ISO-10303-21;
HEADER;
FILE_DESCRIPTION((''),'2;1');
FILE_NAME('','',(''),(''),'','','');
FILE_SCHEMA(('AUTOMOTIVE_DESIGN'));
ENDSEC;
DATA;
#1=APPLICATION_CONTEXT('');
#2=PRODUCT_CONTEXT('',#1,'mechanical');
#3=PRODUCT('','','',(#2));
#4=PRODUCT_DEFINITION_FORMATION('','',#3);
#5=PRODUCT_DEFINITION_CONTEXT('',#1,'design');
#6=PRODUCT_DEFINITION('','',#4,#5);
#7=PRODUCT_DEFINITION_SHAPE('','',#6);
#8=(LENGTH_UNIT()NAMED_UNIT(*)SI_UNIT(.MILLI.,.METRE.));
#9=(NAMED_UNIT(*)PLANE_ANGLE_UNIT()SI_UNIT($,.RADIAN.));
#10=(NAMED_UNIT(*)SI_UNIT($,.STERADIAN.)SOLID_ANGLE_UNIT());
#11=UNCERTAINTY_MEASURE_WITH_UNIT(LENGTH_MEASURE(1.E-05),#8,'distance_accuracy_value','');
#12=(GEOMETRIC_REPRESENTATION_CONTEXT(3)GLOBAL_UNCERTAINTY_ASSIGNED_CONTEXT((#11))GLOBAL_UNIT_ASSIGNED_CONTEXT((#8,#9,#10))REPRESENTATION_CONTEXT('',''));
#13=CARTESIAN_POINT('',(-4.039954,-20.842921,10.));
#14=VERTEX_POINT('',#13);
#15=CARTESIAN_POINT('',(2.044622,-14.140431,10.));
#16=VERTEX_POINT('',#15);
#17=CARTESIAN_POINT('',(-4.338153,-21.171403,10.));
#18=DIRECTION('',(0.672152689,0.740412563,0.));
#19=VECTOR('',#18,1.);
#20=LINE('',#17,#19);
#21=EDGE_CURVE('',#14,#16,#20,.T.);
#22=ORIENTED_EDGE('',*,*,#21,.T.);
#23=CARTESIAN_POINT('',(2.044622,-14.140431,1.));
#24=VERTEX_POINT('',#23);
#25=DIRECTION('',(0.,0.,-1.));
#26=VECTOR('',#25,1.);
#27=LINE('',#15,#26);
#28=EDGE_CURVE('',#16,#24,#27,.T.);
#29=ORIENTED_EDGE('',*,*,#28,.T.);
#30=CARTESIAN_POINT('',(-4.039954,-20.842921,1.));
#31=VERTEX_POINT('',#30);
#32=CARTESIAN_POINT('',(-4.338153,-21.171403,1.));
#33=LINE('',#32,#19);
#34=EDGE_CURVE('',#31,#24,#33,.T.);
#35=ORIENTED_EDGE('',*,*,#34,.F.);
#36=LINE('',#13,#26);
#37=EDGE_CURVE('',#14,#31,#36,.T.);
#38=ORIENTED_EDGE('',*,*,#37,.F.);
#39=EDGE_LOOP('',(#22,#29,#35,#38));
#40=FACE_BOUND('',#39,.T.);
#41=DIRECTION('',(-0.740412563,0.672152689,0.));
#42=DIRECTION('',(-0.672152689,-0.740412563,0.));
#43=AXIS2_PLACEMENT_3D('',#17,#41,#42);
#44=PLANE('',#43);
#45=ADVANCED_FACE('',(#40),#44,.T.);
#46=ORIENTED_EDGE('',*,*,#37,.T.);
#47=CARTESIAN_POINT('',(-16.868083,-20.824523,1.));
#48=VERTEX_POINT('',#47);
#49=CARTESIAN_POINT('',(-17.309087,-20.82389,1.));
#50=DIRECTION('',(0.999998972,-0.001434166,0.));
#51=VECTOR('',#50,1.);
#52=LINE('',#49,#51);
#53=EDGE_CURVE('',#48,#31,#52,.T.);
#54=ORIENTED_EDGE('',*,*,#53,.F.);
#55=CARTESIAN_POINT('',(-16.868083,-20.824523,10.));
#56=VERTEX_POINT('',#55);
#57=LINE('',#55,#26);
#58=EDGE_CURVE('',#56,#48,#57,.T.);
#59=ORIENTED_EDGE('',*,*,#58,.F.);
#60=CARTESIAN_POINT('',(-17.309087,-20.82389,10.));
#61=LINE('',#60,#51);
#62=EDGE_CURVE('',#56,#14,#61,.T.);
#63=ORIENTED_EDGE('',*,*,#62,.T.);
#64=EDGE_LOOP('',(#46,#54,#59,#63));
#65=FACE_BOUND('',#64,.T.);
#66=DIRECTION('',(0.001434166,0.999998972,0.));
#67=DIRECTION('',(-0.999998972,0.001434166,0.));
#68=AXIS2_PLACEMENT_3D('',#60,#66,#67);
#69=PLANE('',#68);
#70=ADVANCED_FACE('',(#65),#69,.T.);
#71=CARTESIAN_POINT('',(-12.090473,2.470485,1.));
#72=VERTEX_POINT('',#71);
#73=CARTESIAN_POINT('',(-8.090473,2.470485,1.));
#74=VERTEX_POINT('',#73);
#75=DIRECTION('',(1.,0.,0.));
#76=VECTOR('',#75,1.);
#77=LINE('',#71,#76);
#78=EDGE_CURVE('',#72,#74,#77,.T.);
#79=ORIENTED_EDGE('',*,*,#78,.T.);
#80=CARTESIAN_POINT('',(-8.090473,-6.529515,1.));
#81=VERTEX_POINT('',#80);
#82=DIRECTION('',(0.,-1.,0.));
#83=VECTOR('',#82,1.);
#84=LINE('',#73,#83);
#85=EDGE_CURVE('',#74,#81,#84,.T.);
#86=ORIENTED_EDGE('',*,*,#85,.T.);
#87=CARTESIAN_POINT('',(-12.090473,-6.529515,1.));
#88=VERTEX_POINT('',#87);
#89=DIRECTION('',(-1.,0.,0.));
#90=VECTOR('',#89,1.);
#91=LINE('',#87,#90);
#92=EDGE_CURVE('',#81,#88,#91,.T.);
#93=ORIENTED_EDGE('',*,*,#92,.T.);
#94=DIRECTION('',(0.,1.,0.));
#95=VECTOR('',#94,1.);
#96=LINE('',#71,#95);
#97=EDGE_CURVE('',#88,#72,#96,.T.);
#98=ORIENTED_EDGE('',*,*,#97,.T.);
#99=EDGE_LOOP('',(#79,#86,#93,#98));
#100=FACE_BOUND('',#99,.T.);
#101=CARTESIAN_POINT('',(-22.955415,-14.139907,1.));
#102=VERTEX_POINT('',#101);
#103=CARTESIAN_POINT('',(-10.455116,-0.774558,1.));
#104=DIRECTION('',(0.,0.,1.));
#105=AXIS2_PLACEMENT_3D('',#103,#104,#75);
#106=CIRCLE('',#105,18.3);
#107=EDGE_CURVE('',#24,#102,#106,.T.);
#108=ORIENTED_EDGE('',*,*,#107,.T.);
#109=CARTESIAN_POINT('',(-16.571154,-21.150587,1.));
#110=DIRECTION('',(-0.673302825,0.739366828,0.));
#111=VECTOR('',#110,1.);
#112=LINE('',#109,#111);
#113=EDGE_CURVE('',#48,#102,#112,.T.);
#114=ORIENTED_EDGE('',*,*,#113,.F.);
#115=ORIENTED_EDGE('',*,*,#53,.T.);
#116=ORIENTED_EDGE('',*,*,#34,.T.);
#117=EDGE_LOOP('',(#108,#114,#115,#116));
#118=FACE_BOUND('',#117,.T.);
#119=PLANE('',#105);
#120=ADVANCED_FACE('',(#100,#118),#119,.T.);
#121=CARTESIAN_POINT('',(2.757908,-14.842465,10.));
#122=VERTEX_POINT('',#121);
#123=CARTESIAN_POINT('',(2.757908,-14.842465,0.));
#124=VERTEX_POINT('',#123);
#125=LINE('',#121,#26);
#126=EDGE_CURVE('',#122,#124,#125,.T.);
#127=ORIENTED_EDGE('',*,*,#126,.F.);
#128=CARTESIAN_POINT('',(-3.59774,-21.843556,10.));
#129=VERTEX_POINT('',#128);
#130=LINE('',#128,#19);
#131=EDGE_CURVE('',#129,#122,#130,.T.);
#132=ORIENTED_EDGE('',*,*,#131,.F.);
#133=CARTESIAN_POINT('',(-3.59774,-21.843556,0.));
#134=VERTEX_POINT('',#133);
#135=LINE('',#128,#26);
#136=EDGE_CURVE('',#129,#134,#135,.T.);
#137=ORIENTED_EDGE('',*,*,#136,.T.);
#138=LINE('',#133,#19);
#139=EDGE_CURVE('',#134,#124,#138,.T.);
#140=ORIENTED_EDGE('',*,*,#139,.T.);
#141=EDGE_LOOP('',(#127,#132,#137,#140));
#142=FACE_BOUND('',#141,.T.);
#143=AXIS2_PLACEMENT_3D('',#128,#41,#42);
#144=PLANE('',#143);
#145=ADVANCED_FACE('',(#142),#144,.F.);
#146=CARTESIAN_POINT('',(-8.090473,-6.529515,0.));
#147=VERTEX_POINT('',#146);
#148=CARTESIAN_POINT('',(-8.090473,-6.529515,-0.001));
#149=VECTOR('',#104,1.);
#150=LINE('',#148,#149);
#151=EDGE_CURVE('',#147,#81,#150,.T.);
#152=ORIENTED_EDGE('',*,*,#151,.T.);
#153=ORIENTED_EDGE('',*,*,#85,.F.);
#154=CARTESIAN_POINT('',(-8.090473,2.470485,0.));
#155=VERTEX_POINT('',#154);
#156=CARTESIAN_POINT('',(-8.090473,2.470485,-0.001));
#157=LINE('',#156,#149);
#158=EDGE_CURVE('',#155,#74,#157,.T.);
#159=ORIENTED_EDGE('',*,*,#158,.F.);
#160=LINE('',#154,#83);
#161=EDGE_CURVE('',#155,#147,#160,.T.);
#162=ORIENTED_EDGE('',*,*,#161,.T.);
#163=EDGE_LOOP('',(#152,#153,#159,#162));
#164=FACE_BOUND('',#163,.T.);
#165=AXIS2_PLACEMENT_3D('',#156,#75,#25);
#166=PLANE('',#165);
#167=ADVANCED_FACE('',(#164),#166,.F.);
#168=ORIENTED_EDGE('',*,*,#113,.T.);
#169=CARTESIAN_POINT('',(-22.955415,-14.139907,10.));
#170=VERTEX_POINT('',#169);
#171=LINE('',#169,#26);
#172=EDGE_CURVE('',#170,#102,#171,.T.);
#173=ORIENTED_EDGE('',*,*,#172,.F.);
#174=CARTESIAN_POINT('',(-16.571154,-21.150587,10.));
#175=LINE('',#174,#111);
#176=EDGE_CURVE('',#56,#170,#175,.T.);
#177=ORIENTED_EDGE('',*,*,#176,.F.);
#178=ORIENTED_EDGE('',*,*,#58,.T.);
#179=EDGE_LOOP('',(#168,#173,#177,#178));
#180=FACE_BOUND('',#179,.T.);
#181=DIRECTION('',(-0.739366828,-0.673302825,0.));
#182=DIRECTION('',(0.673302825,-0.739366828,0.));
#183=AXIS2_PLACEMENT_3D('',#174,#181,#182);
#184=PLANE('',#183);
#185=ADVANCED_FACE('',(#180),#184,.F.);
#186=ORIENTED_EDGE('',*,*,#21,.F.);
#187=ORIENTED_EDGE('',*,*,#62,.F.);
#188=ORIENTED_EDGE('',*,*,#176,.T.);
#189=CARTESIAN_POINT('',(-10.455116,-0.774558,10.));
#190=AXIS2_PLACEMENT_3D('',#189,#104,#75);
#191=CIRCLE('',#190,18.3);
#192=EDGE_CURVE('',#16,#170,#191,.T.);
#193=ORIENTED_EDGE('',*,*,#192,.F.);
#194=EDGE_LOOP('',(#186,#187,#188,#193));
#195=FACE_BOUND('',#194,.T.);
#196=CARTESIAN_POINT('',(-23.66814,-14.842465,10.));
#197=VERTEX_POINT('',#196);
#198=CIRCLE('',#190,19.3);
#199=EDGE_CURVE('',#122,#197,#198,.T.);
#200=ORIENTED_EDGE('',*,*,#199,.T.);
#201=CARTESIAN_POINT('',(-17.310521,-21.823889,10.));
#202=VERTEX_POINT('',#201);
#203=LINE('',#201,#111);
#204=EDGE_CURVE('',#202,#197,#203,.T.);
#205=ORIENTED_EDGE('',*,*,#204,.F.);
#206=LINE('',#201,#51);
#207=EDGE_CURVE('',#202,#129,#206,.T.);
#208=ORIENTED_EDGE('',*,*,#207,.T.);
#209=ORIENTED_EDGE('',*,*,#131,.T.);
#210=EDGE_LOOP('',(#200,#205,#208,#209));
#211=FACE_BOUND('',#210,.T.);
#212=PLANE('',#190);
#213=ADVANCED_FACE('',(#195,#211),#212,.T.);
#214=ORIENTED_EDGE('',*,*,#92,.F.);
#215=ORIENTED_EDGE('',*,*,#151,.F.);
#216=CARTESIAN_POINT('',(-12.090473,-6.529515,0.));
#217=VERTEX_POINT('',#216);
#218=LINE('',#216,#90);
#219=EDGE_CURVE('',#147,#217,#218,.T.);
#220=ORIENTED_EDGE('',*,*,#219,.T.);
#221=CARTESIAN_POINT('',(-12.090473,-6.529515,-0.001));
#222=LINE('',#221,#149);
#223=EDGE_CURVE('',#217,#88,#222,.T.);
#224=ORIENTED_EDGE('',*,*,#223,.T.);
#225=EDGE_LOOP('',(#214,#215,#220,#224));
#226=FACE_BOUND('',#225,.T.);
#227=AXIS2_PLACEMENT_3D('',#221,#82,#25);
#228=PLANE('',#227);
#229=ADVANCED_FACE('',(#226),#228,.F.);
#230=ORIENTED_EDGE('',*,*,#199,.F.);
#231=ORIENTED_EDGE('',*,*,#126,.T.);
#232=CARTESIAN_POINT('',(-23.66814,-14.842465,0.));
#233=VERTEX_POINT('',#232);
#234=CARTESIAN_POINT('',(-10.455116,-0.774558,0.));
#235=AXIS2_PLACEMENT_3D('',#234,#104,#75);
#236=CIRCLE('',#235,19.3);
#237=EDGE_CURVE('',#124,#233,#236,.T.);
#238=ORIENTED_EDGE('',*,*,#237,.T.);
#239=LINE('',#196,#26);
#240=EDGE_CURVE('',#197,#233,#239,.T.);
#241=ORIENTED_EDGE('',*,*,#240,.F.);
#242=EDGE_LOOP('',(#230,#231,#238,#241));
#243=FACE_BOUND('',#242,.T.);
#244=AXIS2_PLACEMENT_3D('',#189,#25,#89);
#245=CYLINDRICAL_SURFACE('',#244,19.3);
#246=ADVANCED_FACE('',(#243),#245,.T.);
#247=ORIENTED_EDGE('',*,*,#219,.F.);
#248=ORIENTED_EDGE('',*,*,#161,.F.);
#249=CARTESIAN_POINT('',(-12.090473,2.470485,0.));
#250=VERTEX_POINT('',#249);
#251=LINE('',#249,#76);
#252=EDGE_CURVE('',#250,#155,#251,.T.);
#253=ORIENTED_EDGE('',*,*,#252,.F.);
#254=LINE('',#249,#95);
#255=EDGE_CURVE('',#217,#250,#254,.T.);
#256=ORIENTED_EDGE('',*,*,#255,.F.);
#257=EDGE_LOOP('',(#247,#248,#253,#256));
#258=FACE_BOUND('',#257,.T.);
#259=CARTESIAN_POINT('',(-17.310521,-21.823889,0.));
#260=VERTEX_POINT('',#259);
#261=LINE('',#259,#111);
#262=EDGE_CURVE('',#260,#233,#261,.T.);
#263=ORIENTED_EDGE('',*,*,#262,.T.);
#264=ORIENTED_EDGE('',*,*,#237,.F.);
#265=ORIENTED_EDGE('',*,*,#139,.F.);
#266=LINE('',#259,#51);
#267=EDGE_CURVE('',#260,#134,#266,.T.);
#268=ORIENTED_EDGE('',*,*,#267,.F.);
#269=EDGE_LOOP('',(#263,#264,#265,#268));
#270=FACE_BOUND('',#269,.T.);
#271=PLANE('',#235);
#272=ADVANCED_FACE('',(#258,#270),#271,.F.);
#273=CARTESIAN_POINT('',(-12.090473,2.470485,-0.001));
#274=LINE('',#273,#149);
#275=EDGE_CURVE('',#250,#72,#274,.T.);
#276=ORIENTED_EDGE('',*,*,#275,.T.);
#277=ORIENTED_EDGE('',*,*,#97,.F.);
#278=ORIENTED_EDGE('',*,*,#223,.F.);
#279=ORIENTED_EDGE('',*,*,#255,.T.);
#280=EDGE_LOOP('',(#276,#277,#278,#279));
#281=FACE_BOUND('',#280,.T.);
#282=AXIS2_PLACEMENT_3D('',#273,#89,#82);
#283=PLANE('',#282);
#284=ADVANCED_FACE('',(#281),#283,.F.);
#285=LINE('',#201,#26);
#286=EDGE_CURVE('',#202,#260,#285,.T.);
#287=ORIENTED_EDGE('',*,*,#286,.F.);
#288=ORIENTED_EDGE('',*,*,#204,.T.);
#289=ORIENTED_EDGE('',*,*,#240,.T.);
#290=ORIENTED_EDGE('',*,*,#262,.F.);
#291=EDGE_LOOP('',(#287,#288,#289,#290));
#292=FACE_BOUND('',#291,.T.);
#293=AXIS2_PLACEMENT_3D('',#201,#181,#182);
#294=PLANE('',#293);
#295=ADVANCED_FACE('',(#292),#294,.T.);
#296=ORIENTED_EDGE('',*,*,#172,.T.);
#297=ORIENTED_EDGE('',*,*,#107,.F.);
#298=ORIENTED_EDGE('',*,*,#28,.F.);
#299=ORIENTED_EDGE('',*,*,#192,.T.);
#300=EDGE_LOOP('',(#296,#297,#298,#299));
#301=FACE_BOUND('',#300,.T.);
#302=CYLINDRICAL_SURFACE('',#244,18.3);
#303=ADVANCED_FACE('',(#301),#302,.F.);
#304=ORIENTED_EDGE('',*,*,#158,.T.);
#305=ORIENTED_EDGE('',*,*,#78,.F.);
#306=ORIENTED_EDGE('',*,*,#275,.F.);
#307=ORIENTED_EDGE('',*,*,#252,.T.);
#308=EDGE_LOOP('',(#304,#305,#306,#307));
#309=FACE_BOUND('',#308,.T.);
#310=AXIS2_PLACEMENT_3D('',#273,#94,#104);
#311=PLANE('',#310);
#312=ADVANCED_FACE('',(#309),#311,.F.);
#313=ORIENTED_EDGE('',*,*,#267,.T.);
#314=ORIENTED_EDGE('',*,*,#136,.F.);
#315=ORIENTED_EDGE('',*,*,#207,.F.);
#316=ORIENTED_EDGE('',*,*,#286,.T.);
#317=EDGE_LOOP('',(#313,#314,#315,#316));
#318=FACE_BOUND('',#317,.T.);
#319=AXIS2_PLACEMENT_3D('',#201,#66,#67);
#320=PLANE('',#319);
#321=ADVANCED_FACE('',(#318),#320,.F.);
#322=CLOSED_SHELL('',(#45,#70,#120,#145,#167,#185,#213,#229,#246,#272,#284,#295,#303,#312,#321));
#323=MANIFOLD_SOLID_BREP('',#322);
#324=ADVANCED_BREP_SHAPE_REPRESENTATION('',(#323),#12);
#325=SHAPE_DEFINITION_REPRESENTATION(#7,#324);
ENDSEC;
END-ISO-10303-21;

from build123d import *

# Parameters (mm, degrees)
BOSS_EXTRUDE1_DEPTH = 10
SHELL1_START        = 1
SHELL1_DEPTH        = 9
CUT_EXTRUDE1_REACH  = 40.243
SKETCH2_W           = 4
SKETCH2_H           = 9


# Read off the part's stored shape, not the designer's step: Shell1
with BuildPart() as part:
    # Sketch1 → Boss-Extrude1 (new body)
    with BuildSketch(Plane.XY):
        with BuildLine():
            Line((-17.310520711, -21.823889376), (-3.597740248, -21.843555797))
            Line((-3.597740248, -21.843555797), (2.757908107, -14.842465178))
            ThreePointArc((2.757908107, -14.842465178), (-10.455115829, 18.525441507), (-23.668139764, -14.842465178))
            Line((-23.668139764, -14.842465178), (-17.310520711, -21.823889376))
        make_face()
    extrude(amount=BOSS_EXTRUDE1_DEPTH)

    # Shell1 outline → Shell1 (cut)
    with BuildSketch(Plane.XY.offset(SHELL1_START)):
        with BuildLine():
            Line((-4.039953619, -20.84292056), (2.044621953, -14.140431281))
            ThreePointArc((2.044621953, -14.140431281), (-10.45473176, 17.525441503), (-22.955414629, -14.139906596))
            Line((-22.955414629, -14.139906596), (-16.868083072, -20.824522877))
            Line((-16.868083072, -20.824522877), (-4.039953619, -20.84292056))
        make_face()
    extrude(amount=SHELL1_DEPTH, mode=Mode.SUBTRACT)

    # Sketch2 → Cut-Extrude1 (cut, up to next)
    with BuildSketch(Plane.XY.offset(10), mode=Mode.PRIVATE) as cut_extrude1_sk1:
        with Locations((-10.090473375, -2.029514736)):
            Rectangle(SKETCH2_W, SKETCH2_H)
    cut_extrude1_tool1 = extrude(cut_extrude1_sk1.sketch, amount=-CUT_EXTRUDE1_REACH, mode=Mode.PRIVATE) & part.part
    add(cut_extrude1_tool1.solids().sort_by_distance((-10.090473, -2.029515, 10))[0], mode=Mode.SUBTRACT)


solid = part.part
